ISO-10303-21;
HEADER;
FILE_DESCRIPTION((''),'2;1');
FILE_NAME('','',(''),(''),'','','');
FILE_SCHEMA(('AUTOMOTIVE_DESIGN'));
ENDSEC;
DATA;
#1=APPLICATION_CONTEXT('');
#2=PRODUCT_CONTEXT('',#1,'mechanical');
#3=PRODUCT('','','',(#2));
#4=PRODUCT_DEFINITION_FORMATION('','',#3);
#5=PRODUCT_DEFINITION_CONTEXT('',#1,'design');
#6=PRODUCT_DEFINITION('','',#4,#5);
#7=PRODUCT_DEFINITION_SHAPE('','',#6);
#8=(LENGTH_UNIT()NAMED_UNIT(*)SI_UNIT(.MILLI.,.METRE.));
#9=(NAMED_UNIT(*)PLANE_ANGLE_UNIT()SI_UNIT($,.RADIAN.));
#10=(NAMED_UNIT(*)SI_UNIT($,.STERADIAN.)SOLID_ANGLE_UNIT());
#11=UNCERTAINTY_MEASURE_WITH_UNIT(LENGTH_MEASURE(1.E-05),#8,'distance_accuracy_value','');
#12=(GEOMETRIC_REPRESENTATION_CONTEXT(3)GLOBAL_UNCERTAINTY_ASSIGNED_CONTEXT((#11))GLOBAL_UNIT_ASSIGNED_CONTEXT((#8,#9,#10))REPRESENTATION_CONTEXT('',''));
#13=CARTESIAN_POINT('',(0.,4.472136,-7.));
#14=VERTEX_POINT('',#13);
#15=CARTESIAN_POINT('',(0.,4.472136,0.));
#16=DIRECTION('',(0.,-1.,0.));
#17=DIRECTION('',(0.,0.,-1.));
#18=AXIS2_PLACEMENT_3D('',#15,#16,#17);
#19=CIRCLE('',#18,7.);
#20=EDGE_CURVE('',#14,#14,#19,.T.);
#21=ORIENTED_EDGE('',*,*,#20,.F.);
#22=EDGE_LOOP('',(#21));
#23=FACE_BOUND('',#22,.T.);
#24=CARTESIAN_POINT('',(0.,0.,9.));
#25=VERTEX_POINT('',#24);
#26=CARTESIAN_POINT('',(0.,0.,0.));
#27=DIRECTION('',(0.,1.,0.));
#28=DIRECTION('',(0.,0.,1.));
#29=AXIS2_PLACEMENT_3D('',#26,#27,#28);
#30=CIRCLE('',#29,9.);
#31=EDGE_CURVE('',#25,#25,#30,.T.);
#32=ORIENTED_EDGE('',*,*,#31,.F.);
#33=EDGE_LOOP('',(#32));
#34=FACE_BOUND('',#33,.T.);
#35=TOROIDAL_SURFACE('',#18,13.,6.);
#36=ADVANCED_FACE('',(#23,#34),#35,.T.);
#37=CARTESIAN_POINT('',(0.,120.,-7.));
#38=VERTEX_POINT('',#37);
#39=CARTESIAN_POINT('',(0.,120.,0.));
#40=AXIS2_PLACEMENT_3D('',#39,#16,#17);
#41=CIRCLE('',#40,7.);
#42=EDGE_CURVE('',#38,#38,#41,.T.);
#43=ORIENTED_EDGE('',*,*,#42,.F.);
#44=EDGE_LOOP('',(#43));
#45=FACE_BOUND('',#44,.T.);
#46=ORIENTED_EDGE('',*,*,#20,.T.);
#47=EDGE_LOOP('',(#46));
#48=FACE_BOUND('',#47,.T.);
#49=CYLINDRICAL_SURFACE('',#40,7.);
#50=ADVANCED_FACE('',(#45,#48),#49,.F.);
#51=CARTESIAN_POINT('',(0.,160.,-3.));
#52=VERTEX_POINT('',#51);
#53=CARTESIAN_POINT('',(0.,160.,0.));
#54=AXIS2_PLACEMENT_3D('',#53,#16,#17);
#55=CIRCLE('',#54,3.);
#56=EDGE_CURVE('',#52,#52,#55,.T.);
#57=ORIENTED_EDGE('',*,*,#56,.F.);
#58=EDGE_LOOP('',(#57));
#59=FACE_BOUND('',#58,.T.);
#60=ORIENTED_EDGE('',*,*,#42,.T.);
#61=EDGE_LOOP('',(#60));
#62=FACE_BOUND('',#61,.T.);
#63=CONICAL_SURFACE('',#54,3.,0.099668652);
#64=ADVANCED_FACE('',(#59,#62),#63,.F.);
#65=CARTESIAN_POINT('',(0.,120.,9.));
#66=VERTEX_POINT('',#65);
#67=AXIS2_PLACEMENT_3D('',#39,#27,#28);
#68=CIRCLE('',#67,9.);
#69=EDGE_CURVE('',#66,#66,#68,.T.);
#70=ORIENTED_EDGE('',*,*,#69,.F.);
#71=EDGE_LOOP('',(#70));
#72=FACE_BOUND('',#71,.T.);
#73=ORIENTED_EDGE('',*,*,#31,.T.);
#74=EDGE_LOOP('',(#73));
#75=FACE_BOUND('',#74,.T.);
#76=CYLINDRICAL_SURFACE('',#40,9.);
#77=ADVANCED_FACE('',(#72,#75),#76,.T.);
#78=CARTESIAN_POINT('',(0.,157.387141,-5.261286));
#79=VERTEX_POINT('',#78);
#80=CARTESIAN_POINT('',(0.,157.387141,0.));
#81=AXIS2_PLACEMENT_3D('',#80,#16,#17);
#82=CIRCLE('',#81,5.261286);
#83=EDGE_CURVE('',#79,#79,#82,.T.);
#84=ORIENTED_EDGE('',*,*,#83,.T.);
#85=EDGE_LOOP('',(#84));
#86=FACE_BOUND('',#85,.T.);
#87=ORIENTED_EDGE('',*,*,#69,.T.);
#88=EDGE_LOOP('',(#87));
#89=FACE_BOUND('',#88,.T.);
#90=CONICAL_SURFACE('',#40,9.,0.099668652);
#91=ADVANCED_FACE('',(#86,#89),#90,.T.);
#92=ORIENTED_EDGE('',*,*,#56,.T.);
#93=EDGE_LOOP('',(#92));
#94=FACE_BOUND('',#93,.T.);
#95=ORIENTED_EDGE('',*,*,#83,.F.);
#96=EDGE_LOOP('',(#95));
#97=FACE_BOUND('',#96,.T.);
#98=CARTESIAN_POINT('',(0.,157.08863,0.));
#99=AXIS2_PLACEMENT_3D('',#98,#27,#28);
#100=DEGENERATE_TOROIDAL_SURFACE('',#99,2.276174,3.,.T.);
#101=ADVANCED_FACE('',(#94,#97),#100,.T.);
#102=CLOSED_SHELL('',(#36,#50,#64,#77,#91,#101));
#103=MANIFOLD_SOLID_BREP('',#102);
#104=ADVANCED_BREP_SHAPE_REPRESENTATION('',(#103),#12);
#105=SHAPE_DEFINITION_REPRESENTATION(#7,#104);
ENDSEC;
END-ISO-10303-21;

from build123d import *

# Parameters (mm, degrees)
SKETCH1_R           = 9
BOSS_EXTRUDE1_DEPTH = 120
SKETCH2_R           = 7
CUT_EXTRUDE1_DEPTH  = 120
FILLET5_R           = 3
FILLET6_R           = 6


with BuildPart() as part:
    # Sketch1 → Boss-Extrude1 (new body)
    with BuildSketch(Plane(origin=(0, 0, 0), x_dir=(1, 0, 0), z_dir=(0, 1, 0))):
        with Locations(Location((0, 0, 0), (0, 0, 270))):
            Circle(SKETCH1_R)
    extrude(amount=BOSS_EXTRUDE1_DEPTH)

    # Sketch2 → Cut-Extrude1 (cut)
    with BuildSketch(Plane.XZ):
        with Locations(Location((0, 0, 0), (0, 0, 270))):
            Circle(SKETCH2_R)
    extrude(amount=-CUT_EXTRUDE1_DEPTH, mode=Mode.SUBTRACT)

    # Sketch3 → Revolve1 (revolve)
    with BuildSketch(Plane.XY, mode=Mode.PRIVATE) as revolve1_sk:
        Polygon((9, 120), (4.9999999999999964, 160), (2.999999999999999, 160), (6.999999999999999, 120), align=None)
    revolve(revolve1_sk.sketch.rotate(Axis((0, 0, 0), (0, 1, 0)), 90), axis=Axis((0, 0, 0), (0, 1, 0)))

    # Fillet5
    # the kernel refuses this fillet: 3 mm, written as the material it takes off along each edge
    with BuildSketch(Plane(origin=(0, 160, 0), x_dir=(1.1e-16, 0, -1), z_dir=(1, 0, 1.1e-16))) as fillet5_piece_1:
        with BuildLine():
            CenterArc((2.276174333017459, -2.9113701935372944), FILLET5_R, 5.710593137499507, 70.32758962785506)
            Line((2.9999999999999947, -2.842e-14), (3.014476513339645, 0.0582274038707169))
            ThreePointArc((3.014476513339645, 0.0582274038707169), (3.9999999999999956, 0.06000000000000227), (4.9999999999999964, 0.06000000000000227))
            Line((4.9999999999999964, 0.06000000000000227), (5.0597022314125955, 0.00597022314124729))
            Line((5.0597022314125955, 0.00597022314124729), (5.320988135060026, -2.6068888133330574))
            Line((5.320988135060026, -2.6068888133330574), (5.261285903647427, -2.6128590364743047))
        make_face()
    revolve(axis=Axis((0, 160, 0), (0, 1, 0)), mode=Mode.SUBTRACT)

    # Fillet6
    # the kernel refuses this fillet: 6 mm, written as the material it takes off along each edge
    with BuildSketch(Plane(origin=(0, 0, 0), x_dir=(-1.8e-16, 0, -1), z_dir=(-1, 0, 1.8e-16))) as fillet6_piece_1:
        with BuildLine():
            CenterArc((13, -4.47213595499958), FILLET6_R, 131.81031489577862, 48.18968510422138)
            Line((7, -4.47213595499958), (6.88, -4.47213595499958))
            Line((6.88, -4.47213595499958), (6.88, 0))
            Line((6.88, 0), (7, 0.12))
            ThreePointArc((7, 0.12), (8, 0.12), (8.92, 0.08944271909999159))
            Line((8.92, 0.08944271909999159), (9, 0))
        make_face()
    revolve(axis=Axis((0, 0, 0), (0, -1, 0)), mode=Mode.SUBTRACT)


solid = part.part
